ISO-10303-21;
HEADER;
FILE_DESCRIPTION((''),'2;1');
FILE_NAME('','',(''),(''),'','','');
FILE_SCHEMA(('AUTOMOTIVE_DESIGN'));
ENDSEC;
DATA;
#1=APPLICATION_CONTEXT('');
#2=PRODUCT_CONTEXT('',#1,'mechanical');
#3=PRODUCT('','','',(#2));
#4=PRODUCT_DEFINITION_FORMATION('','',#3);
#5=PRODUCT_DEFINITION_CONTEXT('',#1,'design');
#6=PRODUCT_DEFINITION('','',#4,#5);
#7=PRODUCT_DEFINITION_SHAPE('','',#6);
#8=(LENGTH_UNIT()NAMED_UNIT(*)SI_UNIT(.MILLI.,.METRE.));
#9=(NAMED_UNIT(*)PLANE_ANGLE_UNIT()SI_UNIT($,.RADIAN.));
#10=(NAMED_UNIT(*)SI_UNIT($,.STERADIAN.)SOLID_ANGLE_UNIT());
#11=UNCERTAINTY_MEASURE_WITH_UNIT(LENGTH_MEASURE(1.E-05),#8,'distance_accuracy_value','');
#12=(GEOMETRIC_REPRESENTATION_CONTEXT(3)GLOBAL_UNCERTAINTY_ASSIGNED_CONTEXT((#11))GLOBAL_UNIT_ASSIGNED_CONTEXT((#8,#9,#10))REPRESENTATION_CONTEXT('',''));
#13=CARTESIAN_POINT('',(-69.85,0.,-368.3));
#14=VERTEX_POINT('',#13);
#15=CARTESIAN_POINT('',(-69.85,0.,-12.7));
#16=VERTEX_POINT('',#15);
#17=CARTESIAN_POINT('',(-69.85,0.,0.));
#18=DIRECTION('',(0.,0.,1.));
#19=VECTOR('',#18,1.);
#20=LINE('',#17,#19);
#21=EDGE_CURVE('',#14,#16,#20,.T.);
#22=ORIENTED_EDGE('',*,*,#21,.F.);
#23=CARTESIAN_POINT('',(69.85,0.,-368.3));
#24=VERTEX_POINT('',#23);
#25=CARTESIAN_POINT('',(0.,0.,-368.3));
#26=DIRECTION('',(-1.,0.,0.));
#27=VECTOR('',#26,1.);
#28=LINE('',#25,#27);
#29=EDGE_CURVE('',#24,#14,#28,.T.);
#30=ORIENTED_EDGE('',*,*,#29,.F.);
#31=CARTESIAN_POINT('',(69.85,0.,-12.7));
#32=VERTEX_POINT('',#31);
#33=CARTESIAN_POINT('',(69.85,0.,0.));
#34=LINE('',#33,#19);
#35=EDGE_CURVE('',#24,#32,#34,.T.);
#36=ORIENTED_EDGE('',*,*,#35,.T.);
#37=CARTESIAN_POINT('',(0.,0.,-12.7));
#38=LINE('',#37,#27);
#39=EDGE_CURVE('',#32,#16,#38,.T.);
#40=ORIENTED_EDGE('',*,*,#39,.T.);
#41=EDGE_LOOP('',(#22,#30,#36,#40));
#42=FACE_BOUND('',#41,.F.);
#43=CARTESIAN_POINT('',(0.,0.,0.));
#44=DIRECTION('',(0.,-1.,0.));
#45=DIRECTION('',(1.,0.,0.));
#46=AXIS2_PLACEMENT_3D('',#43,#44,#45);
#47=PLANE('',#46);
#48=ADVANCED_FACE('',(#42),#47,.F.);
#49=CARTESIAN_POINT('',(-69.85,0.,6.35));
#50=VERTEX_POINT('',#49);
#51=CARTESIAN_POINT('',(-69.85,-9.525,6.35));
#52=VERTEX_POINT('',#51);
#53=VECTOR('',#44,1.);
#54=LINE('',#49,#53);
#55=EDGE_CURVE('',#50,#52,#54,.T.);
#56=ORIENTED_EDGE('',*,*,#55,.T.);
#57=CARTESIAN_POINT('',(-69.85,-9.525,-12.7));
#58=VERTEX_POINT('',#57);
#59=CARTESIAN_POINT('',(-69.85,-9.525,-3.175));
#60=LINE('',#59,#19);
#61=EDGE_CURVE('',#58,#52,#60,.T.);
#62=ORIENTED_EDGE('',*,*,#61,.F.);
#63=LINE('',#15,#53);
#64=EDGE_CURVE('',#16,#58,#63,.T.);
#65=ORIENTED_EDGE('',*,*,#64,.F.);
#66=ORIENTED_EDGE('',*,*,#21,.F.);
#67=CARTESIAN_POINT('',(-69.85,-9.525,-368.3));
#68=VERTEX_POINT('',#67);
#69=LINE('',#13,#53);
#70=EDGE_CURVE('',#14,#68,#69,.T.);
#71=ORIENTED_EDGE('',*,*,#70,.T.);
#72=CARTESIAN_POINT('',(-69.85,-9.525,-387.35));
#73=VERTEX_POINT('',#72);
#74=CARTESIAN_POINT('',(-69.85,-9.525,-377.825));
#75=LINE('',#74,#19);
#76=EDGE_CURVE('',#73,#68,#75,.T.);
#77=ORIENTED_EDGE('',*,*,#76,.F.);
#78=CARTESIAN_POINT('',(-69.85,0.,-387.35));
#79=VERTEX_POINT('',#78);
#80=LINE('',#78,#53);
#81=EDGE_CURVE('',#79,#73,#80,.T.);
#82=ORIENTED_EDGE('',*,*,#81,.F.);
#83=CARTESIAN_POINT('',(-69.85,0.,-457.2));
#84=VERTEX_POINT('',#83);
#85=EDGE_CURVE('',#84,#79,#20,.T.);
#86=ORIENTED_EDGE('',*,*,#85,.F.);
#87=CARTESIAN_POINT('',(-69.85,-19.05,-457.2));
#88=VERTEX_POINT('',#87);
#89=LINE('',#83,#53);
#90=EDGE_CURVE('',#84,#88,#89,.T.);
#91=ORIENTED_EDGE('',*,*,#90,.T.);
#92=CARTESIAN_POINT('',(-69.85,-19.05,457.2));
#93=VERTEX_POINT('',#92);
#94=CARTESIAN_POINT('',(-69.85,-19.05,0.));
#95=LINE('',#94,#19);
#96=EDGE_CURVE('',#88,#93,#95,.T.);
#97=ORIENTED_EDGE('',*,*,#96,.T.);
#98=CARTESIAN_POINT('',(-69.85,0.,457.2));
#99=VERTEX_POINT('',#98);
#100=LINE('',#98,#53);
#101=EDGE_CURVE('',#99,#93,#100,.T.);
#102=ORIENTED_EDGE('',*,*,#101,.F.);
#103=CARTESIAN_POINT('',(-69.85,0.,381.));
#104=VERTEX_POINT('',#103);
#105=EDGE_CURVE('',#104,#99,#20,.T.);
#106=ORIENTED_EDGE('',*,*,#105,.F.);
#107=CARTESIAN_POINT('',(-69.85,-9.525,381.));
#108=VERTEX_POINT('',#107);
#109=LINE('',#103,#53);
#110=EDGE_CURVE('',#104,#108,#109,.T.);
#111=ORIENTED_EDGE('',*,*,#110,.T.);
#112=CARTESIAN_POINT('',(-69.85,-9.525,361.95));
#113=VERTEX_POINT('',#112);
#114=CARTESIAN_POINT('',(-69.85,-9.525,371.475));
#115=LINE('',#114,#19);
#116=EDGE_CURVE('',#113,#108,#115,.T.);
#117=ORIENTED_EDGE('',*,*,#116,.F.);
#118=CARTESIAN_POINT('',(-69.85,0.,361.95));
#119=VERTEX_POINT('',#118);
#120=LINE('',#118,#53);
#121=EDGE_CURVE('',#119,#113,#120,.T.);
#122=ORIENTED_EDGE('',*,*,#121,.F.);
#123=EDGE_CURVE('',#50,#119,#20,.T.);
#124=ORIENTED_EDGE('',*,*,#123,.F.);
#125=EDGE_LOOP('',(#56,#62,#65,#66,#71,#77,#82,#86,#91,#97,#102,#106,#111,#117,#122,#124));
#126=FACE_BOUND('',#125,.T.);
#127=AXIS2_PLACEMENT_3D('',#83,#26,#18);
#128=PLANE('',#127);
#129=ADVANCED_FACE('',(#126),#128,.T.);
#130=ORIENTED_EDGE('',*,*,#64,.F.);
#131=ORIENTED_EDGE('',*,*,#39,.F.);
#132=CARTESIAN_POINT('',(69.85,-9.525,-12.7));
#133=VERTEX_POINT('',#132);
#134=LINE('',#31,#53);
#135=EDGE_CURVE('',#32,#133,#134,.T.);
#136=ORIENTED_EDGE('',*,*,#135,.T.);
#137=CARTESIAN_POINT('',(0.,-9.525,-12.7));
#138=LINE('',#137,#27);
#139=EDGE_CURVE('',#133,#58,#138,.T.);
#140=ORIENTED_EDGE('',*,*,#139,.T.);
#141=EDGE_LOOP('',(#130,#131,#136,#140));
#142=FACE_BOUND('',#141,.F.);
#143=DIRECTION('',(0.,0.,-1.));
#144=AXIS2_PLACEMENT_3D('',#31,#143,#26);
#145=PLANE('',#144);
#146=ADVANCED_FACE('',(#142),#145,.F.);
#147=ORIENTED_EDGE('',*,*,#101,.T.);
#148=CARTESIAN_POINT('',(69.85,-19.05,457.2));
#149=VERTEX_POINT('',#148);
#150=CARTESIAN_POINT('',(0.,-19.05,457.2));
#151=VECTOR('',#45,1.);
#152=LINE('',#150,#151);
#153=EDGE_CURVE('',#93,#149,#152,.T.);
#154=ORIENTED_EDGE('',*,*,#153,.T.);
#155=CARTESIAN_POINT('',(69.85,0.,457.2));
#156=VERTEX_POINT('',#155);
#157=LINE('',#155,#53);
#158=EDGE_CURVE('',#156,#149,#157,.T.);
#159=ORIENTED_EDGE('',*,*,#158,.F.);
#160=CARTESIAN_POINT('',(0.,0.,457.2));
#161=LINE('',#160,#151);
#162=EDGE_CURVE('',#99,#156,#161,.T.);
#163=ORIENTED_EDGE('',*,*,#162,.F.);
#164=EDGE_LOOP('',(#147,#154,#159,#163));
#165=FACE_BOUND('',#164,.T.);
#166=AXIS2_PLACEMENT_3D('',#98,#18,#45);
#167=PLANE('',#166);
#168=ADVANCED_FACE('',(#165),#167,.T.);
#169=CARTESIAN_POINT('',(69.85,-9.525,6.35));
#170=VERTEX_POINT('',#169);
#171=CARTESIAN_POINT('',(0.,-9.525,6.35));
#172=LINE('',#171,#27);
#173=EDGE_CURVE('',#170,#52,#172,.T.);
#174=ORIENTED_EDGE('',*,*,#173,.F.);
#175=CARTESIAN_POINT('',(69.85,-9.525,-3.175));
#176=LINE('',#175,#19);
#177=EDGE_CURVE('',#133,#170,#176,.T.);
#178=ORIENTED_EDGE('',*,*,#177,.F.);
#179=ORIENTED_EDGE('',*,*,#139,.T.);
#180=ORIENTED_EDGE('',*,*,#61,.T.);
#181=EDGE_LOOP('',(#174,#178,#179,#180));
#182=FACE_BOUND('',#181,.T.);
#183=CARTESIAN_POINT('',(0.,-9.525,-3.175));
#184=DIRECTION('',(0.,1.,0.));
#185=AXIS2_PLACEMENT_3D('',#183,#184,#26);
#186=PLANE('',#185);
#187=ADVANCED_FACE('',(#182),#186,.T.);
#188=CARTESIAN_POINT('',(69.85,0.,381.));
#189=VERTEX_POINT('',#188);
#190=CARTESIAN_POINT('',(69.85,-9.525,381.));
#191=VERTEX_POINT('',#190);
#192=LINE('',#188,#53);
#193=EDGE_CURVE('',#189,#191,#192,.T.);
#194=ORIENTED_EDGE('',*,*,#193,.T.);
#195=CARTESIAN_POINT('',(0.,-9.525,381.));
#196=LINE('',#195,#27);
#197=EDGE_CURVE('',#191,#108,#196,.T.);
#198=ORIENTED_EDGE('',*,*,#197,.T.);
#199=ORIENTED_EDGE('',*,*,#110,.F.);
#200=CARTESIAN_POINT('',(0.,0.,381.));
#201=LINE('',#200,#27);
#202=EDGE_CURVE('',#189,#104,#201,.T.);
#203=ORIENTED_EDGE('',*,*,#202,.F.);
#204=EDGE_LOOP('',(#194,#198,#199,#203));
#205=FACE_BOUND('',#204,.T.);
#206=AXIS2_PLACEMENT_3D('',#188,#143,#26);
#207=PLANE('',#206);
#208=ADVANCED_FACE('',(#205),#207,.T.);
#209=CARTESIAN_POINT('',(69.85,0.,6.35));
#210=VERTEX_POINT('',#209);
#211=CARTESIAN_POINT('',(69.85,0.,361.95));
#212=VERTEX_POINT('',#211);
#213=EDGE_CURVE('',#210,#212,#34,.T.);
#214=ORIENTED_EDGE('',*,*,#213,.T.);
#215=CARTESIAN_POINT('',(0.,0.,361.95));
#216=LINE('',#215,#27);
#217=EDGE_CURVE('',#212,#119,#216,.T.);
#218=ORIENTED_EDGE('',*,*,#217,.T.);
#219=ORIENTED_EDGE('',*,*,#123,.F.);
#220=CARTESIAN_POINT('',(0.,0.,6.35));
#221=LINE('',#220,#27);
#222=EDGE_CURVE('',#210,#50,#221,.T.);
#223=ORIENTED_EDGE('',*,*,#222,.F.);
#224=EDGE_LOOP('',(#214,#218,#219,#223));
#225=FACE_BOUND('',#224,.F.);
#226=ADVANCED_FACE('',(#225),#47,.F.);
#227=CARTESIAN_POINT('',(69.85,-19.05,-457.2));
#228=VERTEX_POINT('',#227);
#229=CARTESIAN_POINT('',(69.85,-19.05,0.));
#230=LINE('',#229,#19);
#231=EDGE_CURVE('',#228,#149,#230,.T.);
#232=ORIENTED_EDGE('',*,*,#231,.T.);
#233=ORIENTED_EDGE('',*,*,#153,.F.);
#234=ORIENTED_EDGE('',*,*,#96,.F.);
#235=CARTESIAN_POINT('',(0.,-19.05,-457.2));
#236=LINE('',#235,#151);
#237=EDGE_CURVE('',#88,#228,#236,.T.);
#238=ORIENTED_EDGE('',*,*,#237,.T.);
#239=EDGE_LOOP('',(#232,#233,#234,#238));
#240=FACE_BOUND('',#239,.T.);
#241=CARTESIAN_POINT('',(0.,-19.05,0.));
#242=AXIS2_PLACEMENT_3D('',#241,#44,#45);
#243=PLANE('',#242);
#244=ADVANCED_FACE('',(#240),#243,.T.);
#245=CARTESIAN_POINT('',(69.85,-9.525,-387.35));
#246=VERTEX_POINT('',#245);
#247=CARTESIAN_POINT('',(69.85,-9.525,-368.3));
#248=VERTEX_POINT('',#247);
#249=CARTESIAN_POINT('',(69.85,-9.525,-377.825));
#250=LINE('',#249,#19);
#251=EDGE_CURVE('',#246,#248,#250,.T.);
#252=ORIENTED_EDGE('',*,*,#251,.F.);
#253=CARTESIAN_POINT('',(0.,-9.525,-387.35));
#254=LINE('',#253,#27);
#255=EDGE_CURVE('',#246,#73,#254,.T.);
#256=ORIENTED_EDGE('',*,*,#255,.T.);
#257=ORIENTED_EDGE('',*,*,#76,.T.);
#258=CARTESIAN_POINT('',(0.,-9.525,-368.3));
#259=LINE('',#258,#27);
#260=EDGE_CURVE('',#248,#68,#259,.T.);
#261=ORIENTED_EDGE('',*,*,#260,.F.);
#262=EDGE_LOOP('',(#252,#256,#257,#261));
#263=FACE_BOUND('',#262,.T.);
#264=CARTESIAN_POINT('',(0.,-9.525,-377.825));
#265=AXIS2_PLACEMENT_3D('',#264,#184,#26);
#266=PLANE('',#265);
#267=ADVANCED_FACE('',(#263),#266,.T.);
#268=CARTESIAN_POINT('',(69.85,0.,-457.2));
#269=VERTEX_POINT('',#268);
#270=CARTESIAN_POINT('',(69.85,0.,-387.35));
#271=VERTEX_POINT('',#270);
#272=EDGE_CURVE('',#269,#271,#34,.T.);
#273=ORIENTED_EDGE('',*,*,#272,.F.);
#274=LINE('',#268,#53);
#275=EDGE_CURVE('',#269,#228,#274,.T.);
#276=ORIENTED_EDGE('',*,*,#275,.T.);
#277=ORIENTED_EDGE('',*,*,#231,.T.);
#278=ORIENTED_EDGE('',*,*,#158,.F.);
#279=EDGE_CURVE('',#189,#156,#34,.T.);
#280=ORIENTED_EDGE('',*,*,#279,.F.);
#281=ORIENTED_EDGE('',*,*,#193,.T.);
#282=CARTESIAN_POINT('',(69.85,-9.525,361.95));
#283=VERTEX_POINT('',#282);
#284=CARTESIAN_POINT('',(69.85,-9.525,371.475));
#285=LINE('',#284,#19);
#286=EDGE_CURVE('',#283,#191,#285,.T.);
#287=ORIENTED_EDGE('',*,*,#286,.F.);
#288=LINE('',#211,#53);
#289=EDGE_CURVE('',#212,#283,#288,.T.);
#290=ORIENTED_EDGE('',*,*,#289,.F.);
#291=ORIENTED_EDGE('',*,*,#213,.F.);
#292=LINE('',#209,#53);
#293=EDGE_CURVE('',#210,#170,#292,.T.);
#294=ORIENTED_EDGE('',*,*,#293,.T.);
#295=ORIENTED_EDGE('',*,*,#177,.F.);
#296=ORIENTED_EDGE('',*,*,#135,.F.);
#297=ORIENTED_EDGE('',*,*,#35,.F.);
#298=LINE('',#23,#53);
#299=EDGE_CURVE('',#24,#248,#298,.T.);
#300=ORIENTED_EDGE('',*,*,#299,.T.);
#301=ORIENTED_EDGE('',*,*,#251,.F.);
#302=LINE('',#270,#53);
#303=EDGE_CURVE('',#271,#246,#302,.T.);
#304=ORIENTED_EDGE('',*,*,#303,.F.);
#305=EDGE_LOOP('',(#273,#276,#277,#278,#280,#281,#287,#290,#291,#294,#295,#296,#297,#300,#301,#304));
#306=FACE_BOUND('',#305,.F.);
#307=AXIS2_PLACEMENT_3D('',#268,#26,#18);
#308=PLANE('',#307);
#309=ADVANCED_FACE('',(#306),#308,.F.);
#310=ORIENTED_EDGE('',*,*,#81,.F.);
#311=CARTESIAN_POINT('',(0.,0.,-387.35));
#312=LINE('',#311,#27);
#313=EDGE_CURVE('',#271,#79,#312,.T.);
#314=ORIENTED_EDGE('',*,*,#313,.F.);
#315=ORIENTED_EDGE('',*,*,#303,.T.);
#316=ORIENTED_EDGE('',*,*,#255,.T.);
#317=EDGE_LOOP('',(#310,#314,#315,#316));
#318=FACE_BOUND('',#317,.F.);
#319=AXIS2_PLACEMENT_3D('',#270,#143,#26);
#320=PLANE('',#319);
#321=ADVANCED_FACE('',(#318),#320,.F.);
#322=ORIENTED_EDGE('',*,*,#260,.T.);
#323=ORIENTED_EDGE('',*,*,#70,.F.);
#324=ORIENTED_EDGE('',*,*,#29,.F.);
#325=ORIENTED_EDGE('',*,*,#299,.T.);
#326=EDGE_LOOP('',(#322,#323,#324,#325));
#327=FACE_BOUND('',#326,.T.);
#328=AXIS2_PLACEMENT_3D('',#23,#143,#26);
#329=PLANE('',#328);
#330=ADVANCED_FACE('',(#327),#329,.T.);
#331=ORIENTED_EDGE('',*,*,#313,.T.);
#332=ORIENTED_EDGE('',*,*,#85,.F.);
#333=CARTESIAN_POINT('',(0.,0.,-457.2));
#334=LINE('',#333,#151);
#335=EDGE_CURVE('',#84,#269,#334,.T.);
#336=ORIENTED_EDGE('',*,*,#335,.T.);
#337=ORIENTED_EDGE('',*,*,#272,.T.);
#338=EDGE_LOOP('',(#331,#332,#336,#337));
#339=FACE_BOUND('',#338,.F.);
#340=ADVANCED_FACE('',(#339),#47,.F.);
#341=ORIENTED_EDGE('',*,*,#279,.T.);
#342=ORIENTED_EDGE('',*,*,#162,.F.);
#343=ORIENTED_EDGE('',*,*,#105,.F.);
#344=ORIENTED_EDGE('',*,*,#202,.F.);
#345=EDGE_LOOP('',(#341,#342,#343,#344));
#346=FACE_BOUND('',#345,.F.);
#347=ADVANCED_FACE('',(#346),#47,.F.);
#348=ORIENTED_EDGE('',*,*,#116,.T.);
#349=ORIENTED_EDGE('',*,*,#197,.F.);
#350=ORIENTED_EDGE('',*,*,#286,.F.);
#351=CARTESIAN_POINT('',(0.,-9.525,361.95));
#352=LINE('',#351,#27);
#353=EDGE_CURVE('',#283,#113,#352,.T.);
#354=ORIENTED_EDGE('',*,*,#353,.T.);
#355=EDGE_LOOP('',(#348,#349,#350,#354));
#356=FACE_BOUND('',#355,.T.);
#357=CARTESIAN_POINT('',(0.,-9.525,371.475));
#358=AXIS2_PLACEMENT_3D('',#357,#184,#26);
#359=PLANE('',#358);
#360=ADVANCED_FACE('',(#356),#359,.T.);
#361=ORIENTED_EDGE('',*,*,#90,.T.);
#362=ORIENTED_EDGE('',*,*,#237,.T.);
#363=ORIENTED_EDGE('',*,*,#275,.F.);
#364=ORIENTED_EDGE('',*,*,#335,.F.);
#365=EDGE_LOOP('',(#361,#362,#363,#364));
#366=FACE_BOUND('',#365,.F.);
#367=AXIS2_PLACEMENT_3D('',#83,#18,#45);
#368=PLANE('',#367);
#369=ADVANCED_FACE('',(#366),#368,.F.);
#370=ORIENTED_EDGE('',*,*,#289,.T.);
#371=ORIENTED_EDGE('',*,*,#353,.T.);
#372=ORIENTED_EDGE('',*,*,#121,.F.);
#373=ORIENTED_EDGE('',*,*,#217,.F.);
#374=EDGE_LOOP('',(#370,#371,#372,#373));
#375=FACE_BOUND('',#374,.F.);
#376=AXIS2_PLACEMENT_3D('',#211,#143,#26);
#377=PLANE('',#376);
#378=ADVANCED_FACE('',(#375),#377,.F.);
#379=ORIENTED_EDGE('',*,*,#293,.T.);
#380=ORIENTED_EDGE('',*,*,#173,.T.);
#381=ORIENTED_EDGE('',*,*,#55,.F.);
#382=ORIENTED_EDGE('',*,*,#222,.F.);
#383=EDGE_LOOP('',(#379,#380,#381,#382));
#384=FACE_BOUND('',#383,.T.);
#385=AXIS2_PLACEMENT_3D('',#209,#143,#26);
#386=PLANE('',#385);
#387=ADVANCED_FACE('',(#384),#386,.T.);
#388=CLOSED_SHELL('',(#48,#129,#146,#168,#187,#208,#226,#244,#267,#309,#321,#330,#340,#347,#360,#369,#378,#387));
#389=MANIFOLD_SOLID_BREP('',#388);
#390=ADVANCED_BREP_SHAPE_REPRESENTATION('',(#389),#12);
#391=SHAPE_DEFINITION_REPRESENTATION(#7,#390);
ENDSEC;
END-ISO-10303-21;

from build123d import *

# Parameters (mm, degrees)
F0_W     = 139.7
F0_H     = 914.4
F1_DEPTH = 19.05
F2_W     = 139.7
F2_H     = 19.05
F3_DEPTH = 9.525


# Not quite as in the source:
# - a length typed as a fraction of an inch, garbled in the dataset ("3 / 203.2 mm" for 3/8 in), is restored


with BuildPart() as f1:
    # F0 (on Front) → F1 (new body)
    with BuildSketch(Plane.XZ):
        Rectangle(F0_W, F0_H)
    extrude(amount=F1_DEPTH)

    # F2 (on face) → F3 (cut)
    with BuildSketch(Plane(origin=(0, 0, 0), x_dir=(-1, 0, 0), z_dir=(0, 1, 0))):
        with Locations((0, 371.475)):
            Rectangle(F2_W, F2_H)
        with Locations((0, -3.175)):
            Rectangle(F2_W, F2_H)
        with Locations((0, -377.825)):
            Rectangle(F2_W, F2_H)
    extrude(amount=-F3_DEPTH, mode=Mode.SUBTRACT)


solid = f1.part
